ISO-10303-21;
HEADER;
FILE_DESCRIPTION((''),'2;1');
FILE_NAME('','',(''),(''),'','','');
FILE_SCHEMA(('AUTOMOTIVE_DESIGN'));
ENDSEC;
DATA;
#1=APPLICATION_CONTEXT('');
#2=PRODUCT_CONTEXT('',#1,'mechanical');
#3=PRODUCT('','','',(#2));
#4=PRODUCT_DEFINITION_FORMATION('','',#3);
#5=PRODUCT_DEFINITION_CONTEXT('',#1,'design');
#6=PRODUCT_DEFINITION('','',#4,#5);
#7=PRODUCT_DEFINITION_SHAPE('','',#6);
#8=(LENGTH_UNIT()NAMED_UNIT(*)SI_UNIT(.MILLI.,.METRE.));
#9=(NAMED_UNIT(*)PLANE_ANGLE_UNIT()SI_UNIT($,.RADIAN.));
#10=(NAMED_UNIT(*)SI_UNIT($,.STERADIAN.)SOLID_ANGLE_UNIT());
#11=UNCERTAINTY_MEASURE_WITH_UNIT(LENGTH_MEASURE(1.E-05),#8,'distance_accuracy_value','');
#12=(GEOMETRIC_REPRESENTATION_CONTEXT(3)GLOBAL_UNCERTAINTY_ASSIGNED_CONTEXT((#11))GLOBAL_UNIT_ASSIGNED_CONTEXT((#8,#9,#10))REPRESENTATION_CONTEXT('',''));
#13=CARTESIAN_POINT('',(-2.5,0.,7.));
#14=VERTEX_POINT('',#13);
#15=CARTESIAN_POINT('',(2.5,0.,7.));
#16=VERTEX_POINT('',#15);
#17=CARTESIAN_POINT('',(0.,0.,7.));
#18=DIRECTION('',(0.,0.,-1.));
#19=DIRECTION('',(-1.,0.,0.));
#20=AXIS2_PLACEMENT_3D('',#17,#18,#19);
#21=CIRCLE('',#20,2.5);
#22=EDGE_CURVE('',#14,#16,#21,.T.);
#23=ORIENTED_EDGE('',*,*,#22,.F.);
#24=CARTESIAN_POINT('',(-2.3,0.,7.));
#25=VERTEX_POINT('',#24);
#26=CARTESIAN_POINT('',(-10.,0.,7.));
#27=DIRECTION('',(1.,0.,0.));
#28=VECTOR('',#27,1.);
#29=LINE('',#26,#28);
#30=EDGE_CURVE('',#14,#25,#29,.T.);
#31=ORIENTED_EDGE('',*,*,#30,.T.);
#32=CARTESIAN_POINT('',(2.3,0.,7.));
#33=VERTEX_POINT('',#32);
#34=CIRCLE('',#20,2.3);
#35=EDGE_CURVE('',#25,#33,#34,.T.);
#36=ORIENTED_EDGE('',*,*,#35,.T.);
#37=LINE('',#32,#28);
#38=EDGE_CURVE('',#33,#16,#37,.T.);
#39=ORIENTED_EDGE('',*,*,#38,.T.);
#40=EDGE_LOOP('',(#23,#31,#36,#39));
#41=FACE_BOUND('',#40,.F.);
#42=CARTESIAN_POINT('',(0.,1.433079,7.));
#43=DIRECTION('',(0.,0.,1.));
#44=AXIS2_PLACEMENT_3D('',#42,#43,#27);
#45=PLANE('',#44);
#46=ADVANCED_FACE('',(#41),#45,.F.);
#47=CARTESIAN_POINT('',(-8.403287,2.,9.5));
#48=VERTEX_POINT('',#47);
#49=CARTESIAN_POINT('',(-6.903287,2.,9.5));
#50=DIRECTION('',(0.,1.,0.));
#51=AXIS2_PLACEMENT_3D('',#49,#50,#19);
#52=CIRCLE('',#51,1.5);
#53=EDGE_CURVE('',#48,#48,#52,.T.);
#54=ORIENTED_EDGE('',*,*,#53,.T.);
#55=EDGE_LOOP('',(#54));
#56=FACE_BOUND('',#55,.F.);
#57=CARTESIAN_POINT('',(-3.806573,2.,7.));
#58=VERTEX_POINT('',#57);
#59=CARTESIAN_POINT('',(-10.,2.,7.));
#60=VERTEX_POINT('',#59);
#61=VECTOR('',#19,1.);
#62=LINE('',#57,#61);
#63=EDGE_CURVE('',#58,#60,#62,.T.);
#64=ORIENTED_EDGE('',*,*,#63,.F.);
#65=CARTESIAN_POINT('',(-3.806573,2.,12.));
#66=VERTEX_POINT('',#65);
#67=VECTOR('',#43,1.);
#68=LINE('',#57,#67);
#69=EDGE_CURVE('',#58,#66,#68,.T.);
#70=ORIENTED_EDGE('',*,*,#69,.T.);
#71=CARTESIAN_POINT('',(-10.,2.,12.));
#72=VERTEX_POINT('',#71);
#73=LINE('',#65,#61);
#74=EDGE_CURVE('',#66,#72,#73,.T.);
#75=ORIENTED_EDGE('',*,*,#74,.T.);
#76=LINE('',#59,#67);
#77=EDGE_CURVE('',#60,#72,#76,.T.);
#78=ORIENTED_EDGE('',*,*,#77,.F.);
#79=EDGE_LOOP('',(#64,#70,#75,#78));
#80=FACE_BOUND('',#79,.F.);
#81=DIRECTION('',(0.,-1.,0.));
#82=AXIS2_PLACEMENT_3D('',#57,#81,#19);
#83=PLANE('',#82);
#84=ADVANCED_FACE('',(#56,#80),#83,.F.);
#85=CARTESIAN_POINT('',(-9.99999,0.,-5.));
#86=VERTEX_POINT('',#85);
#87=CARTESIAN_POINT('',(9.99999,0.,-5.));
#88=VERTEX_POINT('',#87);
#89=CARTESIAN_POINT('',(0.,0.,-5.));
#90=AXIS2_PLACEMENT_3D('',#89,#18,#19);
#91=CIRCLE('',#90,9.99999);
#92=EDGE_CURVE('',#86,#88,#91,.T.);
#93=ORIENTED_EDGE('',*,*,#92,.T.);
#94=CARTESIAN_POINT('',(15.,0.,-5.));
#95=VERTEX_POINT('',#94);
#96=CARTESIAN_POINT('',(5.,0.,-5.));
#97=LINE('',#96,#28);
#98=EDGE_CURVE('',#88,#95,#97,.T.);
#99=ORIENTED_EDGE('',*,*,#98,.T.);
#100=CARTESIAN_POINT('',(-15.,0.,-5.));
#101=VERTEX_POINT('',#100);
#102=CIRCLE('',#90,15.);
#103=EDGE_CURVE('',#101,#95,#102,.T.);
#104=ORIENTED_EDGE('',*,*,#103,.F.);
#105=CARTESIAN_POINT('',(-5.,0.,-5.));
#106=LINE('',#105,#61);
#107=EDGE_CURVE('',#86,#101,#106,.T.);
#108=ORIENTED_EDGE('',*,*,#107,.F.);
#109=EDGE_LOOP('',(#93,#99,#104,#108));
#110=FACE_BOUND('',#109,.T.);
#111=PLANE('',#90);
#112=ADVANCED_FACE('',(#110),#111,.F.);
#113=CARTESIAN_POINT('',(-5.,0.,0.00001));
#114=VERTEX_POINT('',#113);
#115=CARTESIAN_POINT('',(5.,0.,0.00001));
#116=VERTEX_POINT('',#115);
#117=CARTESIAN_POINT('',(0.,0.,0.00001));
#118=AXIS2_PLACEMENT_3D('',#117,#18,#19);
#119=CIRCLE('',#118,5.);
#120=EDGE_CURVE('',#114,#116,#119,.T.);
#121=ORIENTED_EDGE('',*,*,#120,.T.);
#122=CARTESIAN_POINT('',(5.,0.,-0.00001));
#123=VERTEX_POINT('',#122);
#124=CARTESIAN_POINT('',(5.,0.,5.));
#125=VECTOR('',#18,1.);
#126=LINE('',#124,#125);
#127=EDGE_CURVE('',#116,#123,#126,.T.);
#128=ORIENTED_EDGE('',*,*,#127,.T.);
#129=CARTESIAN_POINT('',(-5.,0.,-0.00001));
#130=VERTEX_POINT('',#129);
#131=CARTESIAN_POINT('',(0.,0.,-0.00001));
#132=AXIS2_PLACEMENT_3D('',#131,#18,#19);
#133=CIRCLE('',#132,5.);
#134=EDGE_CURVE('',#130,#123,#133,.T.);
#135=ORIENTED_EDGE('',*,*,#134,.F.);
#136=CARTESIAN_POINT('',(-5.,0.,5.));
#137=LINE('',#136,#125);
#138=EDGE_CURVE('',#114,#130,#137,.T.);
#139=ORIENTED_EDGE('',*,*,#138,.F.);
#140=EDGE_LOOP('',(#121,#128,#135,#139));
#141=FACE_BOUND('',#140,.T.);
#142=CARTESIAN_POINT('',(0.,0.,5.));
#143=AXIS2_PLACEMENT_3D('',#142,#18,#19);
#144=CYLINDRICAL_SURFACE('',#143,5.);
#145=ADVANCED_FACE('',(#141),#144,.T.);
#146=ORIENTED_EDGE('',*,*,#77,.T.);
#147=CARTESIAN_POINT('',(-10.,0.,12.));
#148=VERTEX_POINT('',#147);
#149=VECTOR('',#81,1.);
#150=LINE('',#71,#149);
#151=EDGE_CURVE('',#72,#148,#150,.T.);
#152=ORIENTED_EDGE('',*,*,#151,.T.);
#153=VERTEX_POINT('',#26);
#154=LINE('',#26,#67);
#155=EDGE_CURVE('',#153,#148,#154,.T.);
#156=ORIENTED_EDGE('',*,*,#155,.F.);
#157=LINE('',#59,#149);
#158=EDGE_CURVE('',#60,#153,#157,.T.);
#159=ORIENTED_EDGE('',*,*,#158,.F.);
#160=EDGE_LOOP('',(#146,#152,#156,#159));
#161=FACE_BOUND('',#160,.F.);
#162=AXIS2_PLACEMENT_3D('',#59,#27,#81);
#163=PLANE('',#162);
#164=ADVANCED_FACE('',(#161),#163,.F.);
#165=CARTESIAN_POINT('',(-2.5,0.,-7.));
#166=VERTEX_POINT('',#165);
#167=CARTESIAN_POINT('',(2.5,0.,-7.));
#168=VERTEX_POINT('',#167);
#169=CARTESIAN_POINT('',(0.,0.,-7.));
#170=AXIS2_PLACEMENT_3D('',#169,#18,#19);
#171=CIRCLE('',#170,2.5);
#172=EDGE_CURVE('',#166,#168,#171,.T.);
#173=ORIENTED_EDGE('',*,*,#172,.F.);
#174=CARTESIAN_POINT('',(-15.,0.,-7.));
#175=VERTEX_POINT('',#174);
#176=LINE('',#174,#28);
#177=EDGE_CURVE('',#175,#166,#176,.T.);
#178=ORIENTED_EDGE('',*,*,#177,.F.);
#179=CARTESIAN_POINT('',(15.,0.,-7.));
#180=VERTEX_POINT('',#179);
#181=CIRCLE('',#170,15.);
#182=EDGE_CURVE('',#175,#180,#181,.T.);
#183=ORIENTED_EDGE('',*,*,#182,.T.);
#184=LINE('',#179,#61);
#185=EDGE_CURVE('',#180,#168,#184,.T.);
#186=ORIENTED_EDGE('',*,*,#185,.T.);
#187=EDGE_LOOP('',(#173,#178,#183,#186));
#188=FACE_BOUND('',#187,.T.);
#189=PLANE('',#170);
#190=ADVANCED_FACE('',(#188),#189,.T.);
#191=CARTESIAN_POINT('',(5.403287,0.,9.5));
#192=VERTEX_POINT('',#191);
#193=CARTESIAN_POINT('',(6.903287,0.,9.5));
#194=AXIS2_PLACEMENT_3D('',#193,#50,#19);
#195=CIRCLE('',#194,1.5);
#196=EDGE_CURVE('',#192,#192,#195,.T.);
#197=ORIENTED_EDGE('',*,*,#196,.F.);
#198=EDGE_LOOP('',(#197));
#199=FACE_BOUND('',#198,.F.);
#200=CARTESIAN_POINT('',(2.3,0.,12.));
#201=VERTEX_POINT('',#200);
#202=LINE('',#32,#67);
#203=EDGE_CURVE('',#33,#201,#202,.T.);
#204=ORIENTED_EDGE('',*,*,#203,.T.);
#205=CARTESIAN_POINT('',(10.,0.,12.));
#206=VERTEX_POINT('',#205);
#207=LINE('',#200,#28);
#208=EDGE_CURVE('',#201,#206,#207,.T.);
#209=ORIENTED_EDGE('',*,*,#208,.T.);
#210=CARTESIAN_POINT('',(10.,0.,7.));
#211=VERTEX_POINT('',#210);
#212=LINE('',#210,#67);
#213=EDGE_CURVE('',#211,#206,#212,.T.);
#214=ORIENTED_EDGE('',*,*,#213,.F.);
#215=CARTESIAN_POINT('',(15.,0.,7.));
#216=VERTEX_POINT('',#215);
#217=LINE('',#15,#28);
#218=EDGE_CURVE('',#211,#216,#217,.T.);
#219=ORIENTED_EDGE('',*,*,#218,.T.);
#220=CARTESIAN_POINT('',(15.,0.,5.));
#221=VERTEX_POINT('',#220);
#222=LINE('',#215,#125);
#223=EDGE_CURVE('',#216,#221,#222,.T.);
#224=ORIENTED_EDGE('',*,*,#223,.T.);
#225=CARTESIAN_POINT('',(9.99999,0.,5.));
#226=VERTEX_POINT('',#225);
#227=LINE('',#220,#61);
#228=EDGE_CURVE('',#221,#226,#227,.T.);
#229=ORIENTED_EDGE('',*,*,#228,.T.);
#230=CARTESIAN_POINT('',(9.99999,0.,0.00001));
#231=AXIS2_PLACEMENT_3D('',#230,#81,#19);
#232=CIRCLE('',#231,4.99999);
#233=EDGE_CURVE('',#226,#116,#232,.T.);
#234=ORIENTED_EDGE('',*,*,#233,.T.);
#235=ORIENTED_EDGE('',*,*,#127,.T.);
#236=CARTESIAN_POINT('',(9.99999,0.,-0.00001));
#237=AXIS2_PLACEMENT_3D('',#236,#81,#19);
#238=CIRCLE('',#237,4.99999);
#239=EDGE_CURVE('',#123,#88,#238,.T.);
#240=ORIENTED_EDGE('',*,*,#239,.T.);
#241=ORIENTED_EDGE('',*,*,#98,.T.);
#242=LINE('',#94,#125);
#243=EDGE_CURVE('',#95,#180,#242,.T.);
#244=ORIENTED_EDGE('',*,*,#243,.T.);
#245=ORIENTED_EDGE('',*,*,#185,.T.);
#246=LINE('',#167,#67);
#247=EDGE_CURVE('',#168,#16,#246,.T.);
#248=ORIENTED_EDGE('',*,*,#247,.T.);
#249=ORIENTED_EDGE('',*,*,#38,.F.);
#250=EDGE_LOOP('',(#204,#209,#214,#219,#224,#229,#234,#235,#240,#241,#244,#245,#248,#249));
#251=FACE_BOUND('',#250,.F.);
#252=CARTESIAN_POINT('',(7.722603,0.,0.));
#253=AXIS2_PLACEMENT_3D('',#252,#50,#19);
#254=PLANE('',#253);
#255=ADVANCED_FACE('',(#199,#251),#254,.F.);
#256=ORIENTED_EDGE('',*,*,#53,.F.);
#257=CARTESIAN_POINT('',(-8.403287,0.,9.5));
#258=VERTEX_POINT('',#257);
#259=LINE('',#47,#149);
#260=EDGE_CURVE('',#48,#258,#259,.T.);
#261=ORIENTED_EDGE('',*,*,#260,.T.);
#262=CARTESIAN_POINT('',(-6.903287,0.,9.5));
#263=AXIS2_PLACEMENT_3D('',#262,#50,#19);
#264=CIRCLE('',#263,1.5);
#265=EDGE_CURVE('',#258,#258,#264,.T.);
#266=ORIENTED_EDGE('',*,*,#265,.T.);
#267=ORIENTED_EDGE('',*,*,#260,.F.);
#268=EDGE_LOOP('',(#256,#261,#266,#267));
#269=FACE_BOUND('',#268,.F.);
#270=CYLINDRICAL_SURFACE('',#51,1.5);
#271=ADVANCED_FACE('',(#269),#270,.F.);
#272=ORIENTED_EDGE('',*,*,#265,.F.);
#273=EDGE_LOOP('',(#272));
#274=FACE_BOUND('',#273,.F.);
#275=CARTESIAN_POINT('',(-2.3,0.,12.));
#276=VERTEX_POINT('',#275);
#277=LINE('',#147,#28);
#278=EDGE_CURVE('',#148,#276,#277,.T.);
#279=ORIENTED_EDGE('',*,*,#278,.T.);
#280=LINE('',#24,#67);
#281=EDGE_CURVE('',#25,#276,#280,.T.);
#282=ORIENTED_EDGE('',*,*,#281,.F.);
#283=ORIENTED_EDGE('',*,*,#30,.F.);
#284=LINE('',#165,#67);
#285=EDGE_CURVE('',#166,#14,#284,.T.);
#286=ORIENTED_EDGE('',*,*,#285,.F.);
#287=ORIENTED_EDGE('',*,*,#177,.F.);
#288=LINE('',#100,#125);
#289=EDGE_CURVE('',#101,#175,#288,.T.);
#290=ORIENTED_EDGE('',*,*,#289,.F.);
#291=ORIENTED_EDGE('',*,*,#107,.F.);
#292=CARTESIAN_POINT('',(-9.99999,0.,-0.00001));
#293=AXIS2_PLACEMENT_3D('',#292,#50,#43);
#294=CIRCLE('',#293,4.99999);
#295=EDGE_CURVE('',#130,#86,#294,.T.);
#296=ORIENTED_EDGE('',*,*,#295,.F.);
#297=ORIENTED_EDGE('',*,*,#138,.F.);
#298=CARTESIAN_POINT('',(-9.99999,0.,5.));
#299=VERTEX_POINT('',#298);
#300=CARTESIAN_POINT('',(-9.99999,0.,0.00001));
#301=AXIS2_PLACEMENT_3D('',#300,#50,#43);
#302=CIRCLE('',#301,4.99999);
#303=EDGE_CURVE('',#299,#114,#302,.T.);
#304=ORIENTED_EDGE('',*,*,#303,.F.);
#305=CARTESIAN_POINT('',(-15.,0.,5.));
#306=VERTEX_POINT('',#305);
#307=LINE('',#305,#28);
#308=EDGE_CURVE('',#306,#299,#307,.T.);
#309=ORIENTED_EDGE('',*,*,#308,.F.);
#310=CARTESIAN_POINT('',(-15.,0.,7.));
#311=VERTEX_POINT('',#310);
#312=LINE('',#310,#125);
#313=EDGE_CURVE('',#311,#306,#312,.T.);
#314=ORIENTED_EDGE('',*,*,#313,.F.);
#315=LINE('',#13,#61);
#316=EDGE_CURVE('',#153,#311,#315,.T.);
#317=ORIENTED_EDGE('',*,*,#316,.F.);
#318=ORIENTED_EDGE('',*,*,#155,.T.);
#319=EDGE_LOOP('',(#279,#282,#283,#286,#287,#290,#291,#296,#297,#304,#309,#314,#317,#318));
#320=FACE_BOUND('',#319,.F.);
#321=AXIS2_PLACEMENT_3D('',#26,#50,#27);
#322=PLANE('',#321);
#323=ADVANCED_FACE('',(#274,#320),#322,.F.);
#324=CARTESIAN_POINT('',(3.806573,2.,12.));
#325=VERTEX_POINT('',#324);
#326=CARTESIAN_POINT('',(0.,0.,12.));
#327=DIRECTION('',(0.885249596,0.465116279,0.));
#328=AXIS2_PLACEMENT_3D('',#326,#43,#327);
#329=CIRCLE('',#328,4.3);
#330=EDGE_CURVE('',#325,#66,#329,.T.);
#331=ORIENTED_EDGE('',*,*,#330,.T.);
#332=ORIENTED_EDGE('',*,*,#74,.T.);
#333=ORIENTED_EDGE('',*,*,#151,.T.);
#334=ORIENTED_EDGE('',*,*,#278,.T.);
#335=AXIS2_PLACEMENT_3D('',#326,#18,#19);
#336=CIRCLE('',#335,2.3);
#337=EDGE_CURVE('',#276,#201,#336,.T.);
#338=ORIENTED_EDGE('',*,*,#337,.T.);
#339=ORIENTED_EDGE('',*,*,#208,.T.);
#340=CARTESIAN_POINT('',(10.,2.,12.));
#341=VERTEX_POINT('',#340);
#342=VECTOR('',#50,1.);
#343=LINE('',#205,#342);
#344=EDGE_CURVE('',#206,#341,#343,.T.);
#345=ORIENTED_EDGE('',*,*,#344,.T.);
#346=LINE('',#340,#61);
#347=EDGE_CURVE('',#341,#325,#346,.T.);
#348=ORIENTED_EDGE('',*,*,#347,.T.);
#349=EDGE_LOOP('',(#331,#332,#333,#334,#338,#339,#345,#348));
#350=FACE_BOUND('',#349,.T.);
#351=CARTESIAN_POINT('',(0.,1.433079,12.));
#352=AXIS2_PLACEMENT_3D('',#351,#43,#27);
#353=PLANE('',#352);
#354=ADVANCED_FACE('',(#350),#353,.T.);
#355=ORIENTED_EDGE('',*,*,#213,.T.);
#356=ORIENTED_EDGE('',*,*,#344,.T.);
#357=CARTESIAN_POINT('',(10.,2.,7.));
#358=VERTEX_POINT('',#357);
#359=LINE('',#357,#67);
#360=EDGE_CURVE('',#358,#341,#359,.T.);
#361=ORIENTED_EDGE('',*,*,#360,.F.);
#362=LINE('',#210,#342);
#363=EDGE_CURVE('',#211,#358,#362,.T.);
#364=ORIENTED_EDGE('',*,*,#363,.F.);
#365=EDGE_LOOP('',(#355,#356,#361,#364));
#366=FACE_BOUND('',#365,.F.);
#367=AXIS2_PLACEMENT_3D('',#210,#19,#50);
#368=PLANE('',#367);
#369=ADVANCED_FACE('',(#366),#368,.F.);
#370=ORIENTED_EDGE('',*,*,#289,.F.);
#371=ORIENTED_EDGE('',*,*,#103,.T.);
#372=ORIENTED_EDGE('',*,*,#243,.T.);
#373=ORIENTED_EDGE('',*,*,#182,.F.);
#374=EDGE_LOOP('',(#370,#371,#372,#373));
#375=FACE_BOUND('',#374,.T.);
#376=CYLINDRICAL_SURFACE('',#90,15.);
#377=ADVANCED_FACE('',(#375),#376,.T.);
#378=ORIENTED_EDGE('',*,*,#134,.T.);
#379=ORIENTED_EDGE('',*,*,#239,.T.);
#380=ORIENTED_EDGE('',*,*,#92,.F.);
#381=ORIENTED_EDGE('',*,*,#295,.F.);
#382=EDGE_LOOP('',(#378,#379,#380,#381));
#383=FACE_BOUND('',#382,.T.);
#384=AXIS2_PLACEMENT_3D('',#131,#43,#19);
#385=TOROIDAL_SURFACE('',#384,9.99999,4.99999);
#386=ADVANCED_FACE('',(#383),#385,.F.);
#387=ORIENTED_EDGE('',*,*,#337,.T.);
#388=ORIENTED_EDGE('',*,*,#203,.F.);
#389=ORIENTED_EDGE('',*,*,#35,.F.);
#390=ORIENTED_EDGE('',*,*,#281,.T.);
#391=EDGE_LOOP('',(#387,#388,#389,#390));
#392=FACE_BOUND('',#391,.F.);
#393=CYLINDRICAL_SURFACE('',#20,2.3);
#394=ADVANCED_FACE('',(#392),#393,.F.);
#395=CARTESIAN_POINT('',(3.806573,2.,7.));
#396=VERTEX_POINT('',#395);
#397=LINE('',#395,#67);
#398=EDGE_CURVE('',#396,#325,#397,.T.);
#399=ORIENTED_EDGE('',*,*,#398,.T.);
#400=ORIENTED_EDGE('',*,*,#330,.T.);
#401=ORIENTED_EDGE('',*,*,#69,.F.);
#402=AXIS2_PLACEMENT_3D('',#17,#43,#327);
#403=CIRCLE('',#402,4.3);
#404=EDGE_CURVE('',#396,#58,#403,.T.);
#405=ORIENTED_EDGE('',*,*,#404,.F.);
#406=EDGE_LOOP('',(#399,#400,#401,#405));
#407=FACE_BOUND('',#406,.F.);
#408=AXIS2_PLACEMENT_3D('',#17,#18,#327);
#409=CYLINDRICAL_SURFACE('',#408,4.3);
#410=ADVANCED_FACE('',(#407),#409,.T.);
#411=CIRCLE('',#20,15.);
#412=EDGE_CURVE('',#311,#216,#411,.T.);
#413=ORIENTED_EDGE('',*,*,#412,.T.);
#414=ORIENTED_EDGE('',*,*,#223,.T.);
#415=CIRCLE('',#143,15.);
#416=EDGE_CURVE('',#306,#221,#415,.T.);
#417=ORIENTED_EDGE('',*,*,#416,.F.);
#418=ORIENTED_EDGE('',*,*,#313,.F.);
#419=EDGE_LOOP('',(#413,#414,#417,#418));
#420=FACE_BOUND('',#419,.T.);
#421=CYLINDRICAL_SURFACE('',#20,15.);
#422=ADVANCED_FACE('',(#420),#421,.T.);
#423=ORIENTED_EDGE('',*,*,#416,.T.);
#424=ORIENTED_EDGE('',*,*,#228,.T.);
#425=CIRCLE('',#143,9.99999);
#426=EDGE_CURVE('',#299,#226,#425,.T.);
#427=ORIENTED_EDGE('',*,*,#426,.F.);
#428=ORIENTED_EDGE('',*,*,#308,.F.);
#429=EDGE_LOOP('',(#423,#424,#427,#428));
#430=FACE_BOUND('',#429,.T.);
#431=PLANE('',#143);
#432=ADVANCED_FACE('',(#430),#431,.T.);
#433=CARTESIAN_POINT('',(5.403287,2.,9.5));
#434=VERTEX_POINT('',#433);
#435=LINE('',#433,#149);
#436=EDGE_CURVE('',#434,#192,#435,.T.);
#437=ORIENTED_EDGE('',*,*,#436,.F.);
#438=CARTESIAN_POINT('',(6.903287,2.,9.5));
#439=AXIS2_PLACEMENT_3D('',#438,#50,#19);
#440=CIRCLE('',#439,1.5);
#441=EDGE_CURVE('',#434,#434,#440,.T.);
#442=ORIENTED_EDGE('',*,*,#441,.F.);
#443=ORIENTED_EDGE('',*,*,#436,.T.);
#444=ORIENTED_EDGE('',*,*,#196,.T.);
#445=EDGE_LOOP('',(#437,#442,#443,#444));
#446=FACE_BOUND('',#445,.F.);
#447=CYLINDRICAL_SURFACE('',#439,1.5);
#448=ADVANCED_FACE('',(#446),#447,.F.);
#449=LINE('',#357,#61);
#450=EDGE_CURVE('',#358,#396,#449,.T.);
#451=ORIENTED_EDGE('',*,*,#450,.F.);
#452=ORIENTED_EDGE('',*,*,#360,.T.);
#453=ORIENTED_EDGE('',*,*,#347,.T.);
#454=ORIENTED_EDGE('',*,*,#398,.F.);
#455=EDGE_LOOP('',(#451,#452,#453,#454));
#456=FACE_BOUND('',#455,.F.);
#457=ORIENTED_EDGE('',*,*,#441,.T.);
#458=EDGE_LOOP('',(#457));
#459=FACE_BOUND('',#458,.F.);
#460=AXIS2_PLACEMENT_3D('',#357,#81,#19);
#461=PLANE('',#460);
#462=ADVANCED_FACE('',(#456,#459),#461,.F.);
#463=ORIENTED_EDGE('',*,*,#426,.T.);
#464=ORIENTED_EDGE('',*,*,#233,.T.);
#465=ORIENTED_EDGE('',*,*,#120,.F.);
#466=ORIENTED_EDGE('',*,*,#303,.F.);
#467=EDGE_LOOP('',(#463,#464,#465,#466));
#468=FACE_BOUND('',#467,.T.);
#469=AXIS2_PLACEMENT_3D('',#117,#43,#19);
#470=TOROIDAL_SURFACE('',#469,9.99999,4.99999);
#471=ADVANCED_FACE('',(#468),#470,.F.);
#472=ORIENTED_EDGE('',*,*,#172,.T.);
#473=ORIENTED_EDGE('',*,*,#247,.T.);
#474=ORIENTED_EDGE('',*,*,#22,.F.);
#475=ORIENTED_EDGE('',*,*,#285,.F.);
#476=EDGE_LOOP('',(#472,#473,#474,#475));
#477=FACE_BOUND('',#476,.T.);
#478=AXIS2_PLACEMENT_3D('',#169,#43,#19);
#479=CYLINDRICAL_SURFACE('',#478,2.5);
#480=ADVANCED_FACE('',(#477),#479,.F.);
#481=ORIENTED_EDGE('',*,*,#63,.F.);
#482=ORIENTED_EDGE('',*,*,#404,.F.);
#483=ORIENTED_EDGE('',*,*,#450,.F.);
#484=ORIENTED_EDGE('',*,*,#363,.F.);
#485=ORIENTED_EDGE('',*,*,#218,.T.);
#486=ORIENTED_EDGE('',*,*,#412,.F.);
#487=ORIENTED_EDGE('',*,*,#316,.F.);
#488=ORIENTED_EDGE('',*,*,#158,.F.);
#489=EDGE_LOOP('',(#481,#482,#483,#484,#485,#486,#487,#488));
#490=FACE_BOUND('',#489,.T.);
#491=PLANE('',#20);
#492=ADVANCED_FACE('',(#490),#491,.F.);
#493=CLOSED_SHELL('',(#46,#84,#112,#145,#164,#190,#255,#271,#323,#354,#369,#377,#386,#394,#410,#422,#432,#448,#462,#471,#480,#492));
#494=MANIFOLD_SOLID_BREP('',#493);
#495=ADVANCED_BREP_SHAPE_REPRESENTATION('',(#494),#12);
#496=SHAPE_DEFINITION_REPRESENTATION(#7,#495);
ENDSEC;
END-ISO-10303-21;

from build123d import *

# Parameters (mm, degrees)
F1_ANGLE = 180
F3_DEPTH = 5
F4_R     = 1.5
F5_DEPTH = 2.001
F6_R     = 4.99999


# Not quite as in the source:
# - a fillet or chamfer is up to 0.001 mm smaller than in the source, because OpenCascade refuses the exact size


with BuildPart() as f1:
    # F0 (on Front) → F1 (revolve)
    with BuildSketch(Plane.XZ):
        Polygon((-2.5, -7), (-2.5, 7), (-15, 7), (-15, 5), (-5, 5), (-5, -5), (-15, -5), (-15, -7), align=None)
    revolve(axis=Axis((0, 0, 0.6770828075), (0, 0, -1)), revolution_arc=F1_ANGLE)

    # F2 (on face) → F3 (join)
    with BuildSketch(Plane.XY.offset(7)):
        with BuildLine():
            Line((-10, 2), (-10, 0))
            Line((-10, 0), (-2.3, 0))
            ThreePointArc((-2.3, 0), (0, 2.3), (2.3, 0))
            Line((2.3, 0), (10, 0))
            Line((10, 0), (10, 2))
            Line((10, 2), (3.8065732621, 2))
            ThreePointArc((3.8065732621, 2), (0, 4.3), (-3.8065732621, 2))
            Line((-3.8065732621, 2), (-10, 2))
        make_face()
    extrude(amount=F3_DEPTH)

    # F4 (on face) → F5 (cut, through all)
    with BuildSketch(Plane(origin=(0, 2, 0), x_dir=(-1, 0, 0), z_dir=(0, 1, 0))):
        with Locations((6.9032866311, 9.5)):
            Circle(F4_R)
        with Locations((-6.9032866311, 9.5)):
            Circle(F4_R)
    extrude(amount=-F5_DEPTH, mode=Mode.SUBTRACT)

    # F6 (radius 5 in the source; OpenCascade refuses exactly that, so slightly less here)
    f6_edges = [f1.edges().sort_by_distance(p)[0] for p in [
        (0, 5, 5),
        (0, 5, -5),
    ]]
    fillet(f6_edges, radius=F6_R)


solid = f1.part
